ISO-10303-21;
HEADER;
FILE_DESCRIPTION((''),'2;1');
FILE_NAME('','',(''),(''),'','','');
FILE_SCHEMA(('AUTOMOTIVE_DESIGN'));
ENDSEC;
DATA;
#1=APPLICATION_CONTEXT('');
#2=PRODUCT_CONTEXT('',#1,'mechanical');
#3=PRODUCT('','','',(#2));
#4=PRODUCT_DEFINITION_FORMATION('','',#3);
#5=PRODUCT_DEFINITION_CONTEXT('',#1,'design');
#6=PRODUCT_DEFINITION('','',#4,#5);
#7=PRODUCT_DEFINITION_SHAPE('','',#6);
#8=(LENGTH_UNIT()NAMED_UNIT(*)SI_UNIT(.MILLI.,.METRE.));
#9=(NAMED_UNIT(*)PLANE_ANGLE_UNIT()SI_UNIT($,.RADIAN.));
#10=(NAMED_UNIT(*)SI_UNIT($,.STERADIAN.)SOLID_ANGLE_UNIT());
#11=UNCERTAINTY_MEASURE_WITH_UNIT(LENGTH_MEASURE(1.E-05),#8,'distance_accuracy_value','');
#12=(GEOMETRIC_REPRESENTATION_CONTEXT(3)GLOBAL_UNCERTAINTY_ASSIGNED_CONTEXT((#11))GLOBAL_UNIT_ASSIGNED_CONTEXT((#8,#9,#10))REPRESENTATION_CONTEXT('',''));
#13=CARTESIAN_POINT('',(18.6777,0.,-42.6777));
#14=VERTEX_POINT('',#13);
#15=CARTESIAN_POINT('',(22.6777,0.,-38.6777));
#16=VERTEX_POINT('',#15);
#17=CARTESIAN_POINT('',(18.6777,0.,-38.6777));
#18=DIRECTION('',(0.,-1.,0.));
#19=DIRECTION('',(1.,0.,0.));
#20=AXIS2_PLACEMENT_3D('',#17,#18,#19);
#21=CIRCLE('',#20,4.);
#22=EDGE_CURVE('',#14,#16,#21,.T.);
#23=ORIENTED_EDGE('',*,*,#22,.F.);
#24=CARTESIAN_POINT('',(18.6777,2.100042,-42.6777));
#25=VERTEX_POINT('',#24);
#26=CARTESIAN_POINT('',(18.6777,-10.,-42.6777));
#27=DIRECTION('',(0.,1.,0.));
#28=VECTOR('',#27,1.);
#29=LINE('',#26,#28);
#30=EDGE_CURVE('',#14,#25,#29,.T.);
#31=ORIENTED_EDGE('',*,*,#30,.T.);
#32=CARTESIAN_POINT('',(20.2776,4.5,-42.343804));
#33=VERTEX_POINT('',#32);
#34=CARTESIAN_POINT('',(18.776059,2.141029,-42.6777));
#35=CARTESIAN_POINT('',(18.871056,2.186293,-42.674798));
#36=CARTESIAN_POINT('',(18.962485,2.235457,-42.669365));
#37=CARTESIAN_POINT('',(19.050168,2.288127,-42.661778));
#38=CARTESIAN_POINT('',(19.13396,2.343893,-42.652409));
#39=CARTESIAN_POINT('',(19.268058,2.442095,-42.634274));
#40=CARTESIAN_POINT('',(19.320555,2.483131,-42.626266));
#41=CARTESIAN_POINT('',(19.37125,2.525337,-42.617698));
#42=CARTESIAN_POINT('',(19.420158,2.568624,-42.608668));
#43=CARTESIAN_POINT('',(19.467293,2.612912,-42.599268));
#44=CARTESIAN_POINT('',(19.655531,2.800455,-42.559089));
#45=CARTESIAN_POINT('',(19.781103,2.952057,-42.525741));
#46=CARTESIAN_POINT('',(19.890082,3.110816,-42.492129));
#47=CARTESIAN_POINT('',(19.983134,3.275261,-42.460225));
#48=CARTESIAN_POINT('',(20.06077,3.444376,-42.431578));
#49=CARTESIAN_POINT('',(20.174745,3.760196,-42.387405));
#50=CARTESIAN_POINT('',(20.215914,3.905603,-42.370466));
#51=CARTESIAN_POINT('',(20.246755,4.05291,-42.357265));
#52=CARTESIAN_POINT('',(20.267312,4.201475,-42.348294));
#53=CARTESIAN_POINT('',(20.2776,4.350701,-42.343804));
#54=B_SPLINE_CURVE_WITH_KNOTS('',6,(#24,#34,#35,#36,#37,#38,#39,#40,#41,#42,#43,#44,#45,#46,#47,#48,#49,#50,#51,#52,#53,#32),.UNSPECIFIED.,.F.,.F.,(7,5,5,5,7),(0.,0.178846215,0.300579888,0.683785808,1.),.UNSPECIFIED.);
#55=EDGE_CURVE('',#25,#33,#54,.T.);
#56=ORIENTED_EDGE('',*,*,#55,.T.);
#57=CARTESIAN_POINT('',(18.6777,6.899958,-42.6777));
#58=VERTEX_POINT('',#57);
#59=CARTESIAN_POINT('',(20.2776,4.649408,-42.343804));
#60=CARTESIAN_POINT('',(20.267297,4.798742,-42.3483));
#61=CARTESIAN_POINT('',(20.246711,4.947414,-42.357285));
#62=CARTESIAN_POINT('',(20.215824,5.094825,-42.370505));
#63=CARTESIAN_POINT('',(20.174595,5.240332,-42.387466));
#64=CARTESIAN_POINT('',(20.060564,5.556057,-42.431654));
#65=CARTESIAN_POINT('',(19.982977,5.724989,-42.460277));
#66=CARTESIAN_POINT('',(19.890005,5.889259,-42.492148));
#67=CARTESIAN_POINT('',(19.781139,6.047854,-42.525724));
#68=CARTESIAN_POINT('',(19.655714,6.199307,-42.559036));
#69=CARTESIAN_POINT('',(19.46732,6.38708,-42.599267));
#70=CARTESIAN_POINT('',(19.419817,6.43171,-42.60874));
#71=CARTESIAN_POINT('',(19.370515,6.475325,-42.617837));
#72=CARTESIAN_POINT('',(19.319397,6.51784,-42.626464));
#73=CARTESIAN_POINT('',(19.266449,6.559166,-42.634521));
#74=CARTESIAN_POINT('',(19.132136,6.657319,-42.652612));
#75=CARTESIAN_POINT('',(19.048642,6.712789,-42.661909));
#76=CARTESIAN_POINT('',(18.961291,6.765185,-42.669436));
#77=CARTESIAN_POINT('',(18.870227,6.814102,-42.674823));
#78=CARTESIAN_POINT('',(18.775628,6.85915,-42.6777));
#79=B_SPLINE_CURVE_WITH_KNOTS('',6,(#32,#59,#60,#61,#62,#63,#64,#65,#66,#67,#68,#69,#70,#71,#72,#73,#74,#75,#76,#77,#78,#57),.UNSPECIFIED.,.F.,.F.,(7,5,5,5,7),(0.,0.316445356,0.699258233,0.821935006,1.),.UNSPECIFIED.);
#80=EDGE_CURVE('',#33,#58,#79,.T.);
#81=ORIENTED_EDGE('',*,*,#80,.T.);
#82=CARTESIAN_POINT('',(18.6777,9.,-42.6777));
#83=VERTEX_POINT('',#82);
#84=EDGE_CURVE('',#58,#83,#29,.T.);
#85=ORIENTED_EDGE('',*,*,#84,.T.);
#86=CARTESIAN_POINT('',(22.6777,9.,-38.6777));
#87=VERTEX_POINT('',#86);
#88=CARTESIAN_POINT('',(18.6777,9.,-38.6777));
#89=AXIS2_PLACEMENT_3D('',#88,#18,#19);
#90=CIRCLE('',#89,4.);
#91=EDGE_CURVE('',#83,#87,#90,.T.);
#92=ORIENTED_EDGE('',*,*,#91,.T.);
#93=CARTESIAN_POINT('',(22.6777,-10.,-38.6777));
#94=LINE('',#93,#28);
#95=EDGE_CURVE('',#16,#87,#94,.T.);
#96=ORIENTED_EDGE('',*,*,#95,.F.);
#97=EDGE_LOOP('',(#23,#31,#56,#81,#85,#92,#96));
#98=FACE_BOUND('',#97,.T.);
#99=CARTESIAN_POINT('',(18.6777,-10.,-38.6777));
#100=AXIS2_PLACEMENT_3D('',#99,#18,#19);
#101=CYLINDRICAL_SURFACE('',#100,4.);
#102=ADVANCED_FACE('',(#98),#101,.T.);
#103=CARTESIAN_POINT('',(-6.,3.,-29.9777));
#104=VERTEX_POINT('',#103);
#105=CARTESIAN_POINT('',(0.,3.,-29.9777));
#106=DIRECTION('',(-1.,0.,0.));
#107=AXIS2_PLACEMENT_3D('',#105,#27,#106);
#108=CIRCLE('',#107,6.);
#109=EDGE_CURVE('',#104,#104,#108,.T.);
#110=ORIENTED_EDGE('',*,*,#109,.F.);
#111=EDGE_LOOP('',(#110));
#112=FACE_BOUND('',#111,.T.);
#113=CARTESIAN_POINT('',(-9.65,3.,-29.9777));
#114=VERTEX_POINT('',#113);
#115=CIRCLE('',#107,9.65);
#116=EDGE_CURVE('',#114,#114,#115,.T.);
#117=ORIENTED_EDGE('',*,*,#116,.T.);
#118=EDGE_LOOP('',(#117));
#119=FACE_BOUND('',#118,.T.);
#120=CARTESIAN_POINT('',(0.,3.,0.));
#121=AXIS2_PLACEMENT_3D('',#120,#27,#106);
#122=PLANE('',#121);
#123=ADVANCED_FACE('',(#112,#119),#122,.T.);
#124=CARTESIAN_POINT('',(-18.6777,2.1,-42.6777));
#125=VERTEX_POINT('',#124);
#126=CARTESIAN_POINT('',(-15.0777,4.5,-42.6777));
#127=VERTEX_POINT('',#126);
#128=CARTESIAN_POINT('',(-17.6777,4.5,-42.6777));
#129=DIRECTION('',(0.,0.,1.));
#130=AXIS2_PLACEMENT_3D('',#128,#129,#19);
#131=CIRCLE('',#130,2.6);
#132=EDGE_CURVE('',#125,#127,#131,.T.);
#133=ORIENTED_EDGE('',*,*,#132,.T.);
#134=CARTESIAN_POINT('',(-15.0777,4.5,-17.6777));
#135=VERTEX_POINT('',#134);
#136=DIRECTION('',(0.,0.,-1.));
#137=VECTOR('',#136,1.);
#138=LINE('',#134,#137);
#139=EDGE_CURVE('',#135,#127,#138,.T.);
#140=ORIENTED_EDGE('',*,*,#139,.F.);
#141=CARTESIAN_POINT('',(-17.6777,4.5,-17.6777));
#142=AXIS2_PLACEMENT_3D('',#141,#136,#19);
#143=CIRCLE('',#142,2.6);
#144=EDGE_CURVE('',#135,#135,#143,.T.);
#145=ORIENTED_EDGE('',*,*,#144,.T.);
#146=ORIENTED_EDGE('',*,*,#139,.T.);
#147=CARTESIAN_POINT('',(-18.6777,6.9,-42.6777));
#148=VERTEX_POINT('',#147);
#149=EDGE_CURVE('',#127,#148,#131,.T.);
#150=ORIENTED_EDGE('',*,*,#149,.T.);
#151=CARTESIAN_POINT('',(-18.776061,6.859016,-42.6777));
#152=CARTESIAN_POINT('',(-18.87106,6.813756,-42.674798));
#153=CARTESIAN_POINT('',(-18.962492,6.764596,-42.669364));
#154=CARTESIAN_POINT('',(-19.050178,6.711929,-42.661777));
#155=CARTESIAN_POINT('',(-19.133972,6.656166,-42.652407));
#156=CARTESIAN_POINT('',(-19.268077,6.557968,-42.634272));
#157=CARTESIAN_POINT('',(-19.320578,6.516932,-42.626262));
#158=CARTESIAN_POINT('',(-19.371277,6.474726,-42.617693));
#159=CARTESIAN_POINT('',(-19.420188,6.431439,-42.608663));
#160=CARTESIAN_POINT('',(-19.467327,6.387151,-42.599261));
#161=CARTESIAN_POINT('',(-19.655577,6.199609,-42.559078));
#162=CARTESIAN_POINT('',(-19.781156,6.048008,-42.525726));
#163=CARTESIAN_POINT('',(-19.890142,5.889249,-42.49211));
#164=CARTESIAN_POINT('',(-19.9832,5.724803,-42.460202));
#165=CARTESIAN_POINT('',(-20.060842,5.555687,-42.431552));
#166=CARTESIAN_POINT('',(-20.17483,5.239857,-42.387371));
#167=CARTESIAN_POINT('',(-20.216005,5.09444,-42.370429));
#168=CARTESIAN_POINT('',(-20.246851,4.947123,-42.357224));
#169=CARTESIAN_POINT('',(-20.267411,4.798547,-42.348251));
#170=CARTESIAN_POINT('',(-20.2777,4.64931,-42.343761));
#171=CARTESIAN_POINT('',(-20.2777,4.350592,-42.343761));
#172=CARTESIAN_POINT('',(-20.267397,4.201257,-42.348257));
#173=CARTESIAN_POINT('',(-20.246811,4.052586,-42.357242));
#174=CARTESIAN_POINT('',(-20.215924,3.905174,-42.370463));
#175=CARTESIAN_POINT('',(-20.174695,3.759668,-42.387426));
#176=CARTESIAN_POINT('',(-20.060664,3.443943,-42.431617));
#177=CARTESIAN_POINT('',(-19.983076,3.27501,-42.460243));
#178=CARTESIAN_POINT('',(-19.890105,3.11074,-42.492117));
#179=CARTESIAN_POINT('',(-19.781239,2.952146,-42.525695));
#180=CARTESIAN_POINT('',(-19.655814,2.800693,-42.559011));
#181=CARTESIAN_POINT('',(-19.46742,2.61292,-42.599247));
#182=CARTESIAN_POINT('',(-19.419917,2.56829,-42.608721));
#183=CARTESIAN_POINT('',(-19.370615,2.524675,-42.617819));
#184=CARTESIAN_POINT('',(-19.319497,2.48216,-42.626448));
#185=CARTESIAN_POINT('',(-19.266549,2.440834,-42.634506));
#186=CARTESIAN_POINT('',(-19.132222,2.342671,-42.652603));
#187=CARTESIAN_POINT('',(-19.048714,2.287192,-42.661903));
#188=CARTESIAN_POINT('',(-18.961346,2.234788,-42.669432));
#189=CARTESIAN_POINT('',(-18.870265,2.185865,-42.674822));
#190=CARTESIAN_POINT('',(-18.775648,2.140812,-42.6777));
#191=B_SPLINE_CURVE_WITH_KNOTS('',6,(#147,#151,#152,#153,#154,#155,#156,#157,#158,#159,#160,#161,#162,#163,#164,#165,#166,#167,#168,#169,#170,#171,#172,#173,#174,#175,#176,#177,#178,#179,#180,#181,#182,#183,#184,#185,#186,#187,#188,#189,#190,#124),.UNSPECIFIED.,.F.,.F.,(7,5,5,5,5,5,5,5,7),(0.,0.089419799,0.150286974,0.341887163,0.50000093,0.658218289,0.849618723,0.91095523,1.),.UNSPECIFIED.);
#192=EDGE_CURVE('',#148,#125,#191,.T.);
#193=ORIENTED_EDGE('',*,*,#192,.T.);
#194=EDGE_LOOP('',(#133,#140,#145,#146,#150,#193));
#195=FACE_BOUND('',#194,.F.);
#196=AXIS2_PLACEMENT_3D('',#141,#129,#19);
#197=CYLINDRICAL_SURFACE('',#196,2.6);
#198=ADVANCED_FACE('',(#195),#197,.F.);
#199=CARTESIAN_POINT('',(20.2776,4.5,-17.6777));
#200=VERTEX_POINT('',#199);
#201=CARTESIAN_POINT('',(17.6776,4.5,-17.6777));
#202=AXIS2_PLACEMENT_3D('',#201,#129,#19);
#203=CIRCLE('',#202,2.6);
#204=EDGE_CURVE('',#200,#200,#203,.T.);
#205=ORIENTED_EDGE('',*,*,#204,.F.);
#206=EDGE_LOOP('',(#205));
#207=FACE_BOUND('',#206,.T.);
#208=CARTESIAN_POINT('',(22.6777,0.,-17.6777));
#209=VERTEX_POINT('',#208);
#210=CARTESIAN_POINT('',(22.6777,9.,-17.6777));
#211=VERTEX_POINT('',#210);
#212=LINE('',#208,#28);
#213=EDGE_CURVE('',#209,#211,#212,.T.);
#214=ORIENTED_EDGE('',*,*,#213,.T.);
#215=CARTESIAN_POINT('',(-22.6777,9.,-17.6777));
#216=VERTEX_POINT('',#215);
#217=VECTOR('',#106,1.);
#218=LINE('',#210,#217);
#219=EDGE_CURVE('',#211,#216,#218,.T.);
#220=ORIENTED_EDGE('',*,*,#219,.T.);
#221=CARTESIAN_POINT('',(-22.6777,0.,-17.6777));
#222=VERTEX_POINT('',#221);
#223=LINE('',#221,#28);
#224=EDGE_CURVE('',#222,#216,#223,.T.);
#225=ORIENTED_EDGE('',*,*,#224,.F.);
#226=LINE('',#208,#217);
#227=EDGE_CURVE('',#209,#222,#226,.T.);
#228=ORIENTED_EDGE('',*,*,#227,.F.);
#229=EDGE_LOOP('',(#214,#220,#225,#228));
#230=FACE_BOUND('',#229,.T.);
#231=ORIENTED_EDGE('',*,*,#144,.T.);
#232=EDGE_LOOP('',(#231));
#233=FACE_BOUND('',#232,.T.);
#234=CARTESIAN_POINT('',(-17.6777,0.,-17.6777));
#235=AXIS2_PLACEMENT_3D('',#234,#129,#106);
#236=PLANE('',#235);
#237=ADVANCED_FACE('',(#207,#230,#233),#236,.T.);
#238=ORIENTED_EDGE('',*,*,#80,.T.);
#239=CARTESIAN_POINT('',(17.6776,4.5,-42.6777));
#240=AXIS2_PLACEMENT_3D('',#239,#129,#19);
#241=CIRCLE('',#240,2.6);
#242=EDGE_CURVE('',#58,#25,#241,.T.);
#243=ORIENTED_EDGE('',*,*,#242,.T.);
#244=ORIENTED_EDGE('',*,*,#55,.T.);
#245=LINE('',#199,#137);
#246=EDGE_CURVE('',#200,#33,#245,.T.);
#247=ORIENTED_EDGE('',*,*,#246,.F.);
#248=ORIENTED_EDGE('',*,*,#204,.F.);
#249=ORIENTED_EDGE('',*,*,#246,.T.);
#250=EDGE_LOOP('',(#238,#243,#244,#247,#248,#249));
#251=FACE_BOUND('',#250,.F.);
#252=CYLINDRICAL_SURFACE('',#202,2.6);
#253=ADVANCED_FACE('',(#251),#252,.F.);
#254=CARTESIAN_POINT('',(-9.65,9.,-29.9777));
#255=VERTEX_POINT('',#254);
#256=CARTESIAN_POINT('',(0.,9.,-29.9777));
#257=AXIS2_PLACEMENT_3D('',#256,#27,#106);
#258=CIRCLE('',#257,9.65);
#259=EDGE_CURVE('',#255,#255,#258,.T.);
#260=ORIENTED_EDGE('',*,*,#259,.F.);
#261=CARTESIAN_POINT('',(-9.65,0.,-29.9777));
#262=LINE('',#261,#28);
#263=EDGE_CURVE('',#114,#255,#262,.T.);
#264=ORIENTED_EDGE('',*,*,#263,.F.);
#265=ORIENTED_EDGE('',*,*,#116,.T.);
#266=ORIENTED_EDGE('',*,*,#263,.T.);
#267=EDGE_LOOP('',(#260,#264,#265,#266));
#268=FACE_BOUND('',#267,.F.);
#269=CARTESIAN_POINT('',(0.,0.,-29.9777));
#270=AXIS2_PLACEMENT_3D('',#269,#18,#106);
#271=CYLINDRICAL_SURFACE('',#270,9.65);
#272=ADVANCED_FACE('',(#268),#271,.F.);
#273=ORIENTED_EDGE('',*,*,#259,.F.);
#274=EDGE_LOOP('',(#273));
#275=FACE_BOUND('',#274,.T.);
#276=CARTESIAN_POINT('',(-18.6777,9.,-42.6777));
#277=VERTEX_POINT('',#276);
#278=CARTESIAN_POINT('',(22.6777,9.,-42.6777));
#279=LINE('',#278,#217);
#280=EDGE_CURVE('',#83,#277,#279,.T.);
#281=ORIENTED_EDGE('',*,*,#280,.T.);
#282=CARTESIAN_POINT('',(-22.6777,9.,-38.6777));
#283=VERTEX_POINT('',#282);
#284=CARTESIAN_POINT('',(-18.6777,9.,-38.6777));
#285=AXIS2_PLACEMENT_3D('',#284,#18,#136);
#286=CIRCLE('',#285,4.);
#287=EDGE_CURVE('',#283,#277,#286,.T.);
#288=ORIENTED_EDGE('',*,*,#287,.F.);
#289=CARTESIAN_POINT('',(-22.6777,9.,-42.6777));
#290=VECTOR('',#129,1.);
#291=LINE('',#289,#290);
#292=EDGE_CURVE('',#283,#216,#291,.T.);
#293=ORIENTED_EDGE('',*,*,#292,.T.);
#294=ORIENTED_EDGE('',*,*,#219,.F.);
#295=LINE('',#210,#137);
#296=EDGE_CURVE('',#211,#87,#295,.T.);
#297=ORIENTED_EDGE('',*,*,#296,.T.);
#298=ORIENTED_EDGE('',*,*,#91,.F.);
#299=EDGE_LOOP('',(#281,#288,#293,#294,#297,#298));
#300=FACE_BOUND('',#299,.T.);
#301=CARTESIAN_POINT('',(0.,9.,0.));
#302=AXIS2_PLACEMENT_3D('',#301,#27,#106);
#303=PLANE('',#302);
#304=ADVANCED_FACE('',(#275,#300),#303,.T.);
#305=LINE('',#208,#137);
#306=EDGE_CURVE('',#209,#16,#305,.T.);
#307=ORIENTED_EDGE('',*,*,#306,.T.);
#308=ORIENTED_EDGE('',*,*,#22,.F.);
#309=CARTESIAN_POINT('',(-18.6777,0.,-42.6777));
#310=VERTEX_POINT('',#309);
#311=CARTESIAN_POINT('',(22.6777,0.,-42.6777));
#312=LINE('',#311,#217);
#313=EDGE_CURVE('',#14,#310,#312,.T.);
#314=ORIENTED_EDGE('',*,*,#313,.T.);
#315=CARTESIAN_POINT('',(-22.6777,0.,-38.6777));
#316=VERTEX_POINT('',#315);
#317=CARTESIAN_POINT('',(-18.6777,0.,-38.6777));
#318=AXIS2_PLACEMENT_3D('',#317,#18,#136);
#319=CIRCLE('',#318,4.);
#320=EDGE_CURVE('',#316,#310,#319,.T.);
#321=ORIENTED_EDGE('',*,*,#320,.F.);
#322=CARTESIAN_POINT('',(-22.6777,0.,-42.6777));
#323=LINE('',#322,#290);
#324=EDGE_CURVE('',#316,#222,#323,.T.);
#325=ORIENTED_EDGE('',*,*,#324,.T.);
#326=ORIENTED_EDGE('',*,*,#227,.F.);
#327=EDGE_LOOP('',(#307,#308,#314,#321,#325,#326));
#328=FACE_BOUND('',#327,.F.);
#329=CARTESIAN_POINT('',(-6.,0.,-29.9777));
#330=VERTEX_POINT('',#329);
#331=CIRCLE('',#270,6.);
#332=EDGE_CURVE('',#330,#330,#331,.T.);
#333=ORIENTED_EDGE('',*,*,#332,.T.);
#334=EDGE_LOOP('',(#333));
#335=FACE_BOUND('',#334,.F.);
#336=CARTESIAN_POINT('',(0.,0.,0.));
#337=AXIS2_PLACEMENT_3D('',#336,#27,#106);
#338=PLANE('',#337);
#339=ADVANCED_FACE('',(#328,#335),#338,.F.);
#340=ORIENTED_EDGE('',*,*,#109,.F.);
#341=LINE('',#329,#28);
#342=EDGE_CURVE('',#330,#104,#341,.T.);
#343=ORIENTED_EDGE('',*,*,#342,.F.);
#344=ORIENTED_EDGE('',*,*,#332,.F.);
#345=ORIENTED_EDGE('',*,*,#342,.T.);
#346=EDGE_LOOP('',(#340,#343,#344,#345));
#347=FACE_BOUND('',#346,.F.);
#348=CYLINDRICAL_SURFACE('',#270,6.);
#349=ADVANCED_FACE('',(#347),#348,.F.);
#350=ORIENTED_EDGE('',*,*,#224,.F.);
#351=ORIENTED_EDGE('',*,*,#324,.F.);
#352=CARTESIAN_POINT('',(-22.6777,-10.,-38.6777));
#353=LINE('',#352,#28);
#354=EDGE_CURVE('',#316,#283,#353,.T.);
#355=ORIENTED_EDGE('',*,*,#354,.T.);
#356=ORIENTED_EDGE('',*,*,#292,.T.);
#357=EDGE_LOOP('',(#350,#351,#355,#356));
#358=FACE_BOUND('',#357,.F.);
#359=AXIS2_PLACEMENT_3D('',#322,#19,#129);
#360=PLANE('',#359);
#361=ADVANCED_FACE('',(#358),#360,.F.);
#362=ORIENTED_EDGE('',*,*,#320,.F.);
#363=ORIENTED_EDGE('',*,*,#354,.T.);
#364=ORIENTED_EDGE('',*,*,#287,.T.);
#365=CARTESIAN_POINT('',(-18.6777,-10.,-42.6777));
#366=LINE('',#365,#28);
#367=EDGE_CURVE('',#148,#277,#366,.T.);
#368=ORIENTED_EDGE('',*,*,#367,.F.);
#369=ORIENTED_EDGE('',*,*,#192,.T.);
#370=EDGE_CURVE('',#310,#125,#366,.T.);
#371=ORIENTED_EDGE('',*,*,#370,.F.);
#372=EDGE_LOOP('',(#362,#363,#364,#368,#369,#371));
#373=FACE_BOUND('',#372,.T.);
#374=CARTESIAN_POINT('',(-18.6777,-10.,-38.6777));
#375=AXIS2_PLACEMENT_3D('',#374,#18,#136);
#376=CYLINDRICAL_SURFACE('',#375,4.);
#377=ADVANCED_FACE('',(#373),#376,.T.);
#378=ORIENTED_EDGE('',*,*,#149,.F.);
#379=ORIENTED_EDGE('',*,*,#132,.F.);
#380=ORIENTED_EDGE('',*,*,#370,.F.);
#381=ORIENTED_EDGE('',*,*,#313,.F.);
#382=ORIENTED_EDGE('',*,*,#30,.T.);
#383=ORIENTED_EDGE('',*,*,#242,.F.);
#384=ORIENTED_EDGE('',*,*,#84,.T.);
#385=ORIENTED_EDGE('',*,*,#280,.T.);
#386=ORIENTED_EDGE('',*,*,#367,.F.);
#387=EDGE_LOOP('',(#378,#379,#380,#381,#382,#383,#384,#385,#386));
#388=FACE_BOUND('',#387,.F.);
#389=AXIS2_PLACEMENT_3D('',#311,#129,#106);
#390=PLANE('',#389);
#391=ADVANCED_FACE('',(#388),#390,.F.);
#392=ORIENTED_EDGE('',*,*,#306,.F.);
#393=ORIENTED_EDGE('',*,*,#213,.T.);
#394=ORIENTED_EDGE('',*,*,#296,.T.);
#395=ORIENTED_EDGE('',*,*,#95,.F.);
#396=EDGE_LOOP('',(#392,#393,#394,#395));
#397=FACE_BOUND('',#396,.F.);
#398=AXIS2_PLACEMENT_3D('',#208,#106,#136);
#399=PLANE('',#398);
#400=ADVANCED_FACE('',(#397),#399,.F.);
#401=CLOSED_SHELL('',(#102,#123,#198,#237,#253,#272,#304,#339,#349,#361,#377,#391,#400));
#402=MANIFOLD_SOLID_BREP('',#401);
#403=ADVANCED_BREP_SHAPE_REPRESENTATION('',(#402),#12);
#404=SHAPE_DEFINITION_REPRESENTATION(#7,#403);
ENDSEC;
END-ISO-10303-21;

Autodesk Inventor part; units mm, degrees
ref_plane "YZ Plane" through (0, 0, 0) normal (1, 0, 0) x (0, 1, 0)
ref_plane "XZ Plane" through (0, 0, 0) normal (0, 1, 0) x (-1, 0, 0)
ref_plane "XY Plane" through (0, 0, 0) normal (0, 0, 1) x (1, 0, 0)
sketch "Sketch1" plane through (0, 0, 0) normal (0, 1, 0) x (-1, 0, 0)
  line L0 (0, 0) -> (0, -10)
  line L1 (0, -10) -> (10, -10)
  line L2 (10, -10) -> (0, 0)
  line L3 (0, -10) -> (-10, -10)
  line L4 (-10, -10) -> (0, 0)
  line L5 (0, 0) -> (17.6777, -17.6777)
  line L6 (0, 0) -> (-17.6777, -17.6777)
  line L7 (-17.6777, -17.6777) -> (17.6777, -17.6777)
  line L8 (0, -17.6777) -> (0, -29.9777)
  circle A0 centre (0, -29.9777) radius 9.65
  circle A1 centre (0, -29.9777) radius 6
  line L9 (17.6777, -17.6777) -> (22.6777, -17.6777)
  line L10 (-17.6777, -17.6777) -> (-22.6777, -17.6777)
  line L11 (-22.6777, -17.6777) -> (-22.6777, -42.6777)
  line L12 (-22.6777, -42.6777) -> (22.6777, -42.6777)
  line L13 (22.6777, -42.6777) -> (22.6777, -17.6777)
  dimension "d0" = 10
  dimension "d1" = 10
  dimension "d2" = 10
  dimension "d3" = 25
  dimension "d4" = 25
  dimension "d5" = 12.3
  dimension "d6" = 19.3
  dimension "d7" = 12
  dimension "d8" = 5
  dimension "d9" = 5
  dimension "d10" = 25
extrude "Extrusion1" add sketch "Sketch1" along normal blind 3 contours A0
extrude "Extrusion2" add sketch "Sketch1" along normal blind 9 contours L9 L13 L12 L11 L10 L7
sketch "Sketch2" plane through (-22.6777, 0, -17.6777) normal (0, 0, 1) x (1, 0, 0)
  line L0 (0, 0) -> (0, 9)
  line L1 (0, 4.5) -> (5, 4.5)
  line L2 (45.3553, 9) -> (45.3553, 0)
  line L3 (45.3553, 4.5) -> (40.3553, 4.5)
  circle A0 centre (5, 4.5) radius 2.6
  circle A1 centre (40.3553, 4.5) radius 2.6
  point P0 (22.6777, 0)
  dimension "d15" = 5
  dimension "d16" = 5
  dimension "d17" = 5.2
  dimension "d18" = 5.2
extrude "Extrusion3" cut sketch "Sketch2" against normal blind 26
fillet "Fillet1" radius 4 2 edges at (22.6777, 4.5, -42.6777) (-22.6777, 4.5, -42.6777)
properties part number "bearing_holder_corner_tb"
